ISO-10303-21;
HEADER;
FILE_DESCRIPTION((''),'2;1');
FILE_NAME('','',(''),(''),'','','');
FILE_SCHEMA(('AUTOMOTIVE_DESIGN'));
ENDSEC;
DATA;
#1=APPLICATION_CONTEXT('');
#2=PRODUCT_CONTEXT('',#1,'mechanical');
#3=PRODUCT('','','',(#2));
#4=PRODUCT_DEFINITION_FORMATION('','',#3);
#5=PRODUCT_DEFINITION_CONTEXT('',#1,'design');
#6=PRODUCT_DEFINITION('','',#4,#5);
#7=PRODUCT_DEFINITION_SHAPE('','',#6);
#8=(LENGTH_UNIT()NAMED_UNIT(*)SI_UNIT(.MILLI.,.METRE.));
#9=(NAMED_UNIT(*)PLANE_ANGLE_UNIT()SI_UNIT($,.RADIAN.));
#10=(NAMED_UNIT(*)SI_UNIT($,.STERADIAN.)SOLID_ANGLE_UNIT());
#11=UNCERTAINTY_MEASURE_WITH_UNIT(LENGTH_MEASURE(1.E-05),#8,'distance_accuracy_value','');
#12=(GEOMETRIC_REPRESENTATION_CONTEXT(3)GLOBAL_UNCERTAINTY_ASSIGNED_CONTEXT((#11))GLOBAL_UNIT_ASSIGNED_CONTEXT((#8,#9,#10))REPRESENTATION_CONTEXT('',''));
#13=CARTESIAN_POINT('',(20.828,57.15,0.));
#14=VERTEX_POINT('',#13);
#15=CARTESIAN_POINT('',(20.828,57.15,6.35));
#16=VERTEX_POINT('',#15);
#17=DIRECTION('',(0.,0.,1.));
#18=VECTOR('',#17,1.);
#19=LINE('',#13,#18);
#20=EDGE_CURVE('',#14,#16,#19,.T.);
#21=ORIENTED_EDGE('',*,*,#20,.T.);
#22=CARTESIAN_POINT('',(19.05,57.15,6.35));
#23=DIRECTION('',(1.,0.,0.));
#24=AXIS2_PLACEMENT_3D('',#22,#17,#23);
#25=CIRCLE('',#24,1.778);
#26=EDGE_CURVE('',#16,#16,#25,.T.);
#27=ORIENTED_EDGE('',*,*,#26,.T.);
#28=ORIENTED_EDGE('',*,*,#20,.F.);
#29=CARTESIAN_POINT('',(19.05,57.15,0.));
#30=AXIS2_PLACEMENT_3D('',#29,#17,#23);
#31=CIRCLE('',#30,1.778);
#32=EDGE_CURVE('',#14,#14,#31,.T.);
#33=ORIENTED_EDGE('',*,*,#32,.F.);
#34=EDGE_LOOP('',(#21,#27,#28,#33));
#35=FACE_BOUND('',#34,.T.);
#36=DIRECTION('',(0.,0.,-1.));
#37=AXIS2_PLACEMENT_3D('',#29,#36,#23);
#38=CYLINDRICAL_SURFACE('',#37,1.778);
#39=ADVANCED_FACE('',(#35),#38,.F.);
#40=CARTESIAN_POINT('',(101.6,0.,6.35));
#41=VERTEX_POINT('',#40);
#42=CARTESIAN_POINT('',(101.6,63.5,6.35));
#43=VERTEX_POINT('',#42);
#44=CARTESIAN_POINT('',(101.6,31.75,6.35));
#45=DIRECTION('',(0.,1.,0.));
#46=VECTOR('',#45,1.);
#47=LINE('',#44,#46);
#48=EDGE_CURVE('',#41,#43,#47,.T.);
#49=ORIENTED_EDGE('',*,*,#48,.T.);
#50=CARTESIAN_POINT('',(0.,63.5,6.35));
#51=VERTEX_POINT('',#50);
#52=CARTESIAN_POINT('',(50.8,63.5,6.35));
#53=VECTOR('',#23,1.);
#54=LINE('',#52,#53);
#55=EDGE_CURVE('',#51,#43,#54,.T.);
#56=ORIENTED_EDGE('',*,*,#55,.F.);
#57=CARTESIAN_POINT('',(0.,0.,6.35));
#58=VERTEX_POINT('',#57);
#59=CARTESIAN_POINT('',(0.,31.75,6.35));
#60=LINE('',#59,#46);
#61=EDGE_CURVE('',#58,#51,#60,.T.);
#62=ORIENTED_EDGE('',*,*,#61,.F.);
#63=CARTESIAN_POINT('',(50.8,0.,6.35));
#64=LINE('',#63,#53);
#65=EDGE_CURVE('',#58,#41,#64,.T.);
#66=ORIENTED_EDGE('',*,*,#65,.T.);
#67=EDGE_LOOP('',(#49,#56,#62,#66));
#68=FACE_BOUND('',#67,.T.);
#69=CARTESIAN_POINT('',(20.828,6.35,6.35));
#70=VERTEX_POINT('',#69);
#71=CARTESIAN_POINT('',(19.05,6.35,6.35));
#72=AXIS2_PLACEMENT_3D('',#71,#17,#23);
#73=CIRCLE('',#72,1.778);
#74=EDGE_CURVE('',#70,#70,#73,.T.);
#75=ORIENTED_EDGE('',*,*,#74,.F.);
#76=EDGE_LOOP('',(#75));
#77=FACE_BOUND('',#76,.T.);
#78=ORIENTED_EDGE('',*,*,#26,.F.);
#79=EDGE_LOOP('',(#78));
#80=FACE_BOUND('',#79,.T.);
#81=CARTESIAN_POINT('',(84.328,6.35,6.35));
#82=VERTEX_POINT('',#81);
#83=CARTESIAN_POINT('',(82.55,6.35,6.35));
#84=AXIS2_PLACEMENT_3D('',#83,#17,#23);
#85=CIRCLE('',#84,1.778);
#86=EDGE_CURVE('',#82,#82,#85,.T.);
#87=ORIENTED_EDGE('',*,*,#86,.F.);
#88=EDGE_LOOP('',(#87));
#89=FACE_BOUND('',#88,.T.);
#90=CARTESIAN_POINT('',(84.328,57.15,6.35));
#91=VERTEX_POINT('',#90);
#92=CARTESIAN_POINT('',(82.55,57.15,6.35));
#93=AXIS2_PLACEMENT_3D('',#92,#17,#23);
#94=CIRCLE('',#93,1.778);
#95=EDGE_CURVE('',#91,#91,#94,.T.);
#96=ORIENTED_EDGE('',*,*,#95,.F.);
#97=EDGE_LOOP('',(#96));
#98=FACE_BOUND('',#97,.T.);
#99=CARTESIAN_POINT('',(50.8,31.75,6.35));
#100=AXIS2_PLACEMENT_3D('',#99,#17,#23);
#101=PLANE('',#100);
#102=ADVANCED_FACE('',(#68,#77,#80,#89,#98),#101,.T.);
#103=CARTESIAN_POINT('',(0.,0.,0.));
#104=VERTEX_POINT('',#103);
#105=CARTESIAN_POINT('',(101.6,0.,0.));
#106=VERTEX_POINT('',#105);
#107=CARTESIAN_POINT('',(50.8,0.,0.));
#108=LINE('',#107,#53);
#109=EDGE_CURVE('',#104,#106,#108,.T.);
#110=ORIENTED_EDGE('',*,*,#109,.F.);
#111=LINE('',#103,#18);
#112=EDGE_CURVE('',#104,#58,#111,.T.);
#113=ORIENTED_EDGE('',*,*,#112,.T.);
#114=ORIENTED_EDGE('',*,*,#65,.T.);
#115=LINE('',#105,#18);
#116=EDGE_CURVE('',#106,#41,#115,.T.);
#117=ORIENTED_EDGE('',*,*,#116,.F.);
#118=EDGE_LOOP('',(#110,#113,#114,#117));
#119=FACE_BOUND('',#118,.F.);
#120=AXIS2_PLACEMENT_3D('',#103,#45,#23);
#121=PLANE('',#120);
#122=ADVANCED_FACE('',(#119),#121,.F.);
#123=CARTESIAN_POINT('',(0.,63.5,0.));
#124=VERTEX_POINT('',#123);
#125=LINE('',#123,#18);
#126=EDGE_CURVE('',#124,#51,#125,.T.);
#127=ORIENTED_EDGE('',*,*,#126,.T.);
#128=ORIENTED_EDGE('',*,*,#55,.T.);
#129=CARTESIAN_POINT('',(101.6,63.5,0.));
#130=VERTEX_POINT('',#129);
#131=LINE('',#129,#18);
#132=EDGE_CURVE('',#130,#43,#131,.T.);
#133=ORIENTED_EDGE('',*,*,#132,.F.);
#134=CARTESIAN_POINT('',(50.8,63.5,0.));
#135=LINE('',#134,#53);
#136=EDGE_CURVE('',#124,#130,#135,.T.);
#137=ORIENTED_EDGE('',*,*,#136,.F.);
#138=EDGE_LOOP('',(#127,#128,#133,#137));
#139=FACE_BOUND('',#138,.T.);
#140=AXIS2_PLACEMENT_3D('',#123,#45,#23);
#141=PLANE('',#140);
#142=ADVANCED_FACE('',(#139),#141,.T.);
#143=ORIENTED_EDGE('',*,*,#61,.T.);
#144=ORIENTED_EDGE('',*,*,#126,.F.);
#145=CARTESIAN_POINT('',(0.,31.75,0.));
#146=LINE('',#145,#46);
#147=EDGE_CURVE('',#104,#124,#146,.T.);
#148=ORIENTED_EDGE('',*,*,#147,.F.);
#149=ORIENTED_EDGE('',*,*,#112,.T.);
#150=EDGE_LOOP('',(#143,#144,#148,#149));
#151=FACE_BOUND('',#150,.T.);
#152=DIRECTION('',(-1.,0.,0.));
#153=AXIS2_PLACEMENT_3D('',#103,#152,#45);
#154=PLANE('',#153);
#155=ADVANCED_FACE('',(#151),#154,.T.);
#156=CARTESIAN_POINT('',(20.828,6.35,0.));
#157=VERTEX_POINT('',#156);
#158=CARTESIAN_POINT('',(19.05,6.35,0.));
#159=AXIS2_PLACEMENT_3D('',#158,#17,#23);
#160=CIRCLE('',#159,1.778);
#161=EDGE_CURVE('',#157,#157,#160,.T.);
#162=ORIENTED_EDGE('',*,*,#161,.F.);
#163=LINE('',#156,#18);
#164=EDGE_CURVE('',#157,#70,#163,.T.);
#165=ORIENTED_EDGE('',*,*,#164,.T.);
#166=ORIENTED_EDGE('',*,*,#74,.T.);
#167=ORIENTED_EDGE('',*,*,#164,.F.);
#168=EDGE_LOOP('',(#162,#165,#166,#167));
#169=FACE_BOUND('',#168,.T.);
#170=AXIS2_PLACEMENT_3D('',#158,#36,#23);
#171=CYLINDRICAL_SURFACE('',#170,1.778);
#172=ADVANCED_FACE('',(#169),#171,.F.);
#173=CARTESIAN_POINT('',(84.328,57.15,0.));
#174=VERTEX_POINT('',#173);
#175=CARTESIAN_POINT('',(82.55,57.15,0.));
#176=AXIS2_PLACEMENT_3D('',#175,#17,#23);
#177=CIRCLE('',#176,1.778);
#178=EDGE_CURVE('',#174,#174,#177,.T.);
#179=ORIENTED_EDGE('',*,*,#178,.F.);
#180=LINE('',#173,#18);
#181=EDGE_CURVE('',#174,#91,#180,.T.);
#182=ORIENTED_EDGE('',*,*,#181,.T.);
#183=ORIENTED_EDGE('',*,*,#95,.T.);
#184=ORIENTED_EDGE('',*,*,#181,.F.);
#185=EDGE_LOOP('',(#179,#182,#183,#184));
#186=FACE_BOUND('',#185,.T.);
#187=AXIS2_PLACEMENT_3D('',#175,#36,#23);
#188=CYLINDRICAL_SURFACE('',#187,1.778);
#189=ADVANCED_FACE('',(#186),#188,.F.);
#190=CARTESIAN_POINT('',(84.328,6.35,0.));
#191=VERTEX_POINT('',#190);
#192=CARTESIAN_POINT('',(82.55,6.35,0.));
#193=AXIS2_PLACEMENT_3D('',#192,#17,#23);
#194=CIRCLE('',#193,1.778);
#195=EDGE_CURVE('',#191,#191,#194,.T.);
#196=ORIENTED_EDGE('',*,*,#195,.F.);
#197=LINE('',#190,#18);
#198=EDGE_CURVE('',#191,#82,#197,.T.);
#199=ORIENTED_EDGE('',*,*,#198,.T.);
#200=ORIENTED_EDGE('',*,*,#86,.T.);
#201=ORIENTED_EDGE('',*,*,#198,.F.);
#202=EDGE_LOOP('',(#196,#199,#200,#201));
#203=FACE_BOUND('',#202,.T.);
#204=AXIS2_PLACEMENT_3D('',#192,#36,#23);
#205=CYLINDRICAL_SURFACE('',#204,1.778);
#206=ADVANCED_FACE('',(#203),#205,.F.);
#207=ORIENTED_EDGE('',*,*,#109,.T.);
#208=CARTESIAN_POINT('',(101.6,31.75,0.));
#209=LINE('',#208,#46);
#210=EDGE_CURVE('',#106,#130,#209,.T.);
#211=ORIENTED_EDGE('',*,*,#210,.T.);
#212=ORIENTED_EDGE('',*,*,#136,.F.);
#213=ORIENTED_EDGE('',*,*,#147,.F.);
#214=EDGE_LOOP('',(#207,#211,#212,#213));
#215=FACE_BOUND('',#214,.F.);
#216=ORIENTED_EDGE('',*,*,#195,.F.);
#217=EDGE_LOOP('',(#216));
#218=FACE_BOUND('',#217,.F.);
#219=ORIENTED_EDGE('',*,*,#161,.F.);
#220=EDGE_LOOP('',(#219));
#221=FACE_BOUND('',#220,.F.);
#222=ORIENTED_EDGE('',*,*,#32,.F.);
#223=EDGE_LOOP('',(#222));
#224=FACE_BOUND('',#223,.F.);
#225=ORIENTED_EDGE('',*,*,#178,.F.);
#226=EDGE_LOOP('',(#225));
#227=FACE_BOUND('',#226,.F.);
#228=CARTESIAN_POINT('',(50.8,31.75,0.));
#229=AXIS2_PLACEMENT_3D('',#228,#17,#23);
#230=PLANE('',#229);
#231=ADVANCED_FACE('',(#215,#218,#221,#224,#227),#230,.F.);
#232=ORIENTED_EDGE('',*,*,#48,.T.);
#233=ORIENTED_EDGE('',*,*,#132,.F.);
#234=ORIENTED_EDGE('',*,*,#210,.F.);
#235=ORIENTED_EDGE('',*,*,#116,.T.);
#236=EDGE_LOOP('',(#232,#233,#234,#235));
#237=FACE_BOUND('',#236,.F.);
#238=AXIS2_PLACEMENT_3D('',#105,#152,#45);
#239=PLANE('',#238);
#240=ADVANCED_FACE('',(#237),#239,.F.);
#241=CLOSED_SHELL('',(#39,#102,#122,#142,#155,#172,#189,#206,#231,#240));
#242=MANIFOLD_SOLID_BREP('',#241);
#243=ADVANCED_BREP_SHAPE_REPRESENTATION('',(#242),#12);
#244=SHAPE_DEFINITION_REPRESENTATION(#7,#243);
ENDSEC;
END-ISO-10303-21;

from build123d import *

# Parameters (mm, degrees)
F0_W     = 101.6
F0_H     = 63.5
F0_R     = 1.778
F1_DEPTH = 6.35


# Not quite as in the source:
# - a length typed as a fraction of an inch, garbled in the dataset ("3 / 203.2 mm" for 3/8 in), is restored


with BuildPart() as f1:
    # F0 (on Top) → F1 (new body)
    with BuildSketch(Plane.XY):
        with Locations((50.8, 31.75)):
            Rectangle(F0_W, F0_H)
        with Locations((19.05, 6.35)):
            Circle(F0_R, mode=Mode.SUBTRACT)
        with Locations((82.55, 6.35)):
            Circle(F0_R, mode=Mode.SUBTRACT)
        with Locations((19.05, 57.15)):
            Circle(F0_R, mode=Mode.SUBTRACT)
        with Locations((82.55, 57.15)):
            Circle(F0_R, mode=Mode.SUBTRACT)
    extrude(amount=F1_DEPTH)


solid = f1.part
